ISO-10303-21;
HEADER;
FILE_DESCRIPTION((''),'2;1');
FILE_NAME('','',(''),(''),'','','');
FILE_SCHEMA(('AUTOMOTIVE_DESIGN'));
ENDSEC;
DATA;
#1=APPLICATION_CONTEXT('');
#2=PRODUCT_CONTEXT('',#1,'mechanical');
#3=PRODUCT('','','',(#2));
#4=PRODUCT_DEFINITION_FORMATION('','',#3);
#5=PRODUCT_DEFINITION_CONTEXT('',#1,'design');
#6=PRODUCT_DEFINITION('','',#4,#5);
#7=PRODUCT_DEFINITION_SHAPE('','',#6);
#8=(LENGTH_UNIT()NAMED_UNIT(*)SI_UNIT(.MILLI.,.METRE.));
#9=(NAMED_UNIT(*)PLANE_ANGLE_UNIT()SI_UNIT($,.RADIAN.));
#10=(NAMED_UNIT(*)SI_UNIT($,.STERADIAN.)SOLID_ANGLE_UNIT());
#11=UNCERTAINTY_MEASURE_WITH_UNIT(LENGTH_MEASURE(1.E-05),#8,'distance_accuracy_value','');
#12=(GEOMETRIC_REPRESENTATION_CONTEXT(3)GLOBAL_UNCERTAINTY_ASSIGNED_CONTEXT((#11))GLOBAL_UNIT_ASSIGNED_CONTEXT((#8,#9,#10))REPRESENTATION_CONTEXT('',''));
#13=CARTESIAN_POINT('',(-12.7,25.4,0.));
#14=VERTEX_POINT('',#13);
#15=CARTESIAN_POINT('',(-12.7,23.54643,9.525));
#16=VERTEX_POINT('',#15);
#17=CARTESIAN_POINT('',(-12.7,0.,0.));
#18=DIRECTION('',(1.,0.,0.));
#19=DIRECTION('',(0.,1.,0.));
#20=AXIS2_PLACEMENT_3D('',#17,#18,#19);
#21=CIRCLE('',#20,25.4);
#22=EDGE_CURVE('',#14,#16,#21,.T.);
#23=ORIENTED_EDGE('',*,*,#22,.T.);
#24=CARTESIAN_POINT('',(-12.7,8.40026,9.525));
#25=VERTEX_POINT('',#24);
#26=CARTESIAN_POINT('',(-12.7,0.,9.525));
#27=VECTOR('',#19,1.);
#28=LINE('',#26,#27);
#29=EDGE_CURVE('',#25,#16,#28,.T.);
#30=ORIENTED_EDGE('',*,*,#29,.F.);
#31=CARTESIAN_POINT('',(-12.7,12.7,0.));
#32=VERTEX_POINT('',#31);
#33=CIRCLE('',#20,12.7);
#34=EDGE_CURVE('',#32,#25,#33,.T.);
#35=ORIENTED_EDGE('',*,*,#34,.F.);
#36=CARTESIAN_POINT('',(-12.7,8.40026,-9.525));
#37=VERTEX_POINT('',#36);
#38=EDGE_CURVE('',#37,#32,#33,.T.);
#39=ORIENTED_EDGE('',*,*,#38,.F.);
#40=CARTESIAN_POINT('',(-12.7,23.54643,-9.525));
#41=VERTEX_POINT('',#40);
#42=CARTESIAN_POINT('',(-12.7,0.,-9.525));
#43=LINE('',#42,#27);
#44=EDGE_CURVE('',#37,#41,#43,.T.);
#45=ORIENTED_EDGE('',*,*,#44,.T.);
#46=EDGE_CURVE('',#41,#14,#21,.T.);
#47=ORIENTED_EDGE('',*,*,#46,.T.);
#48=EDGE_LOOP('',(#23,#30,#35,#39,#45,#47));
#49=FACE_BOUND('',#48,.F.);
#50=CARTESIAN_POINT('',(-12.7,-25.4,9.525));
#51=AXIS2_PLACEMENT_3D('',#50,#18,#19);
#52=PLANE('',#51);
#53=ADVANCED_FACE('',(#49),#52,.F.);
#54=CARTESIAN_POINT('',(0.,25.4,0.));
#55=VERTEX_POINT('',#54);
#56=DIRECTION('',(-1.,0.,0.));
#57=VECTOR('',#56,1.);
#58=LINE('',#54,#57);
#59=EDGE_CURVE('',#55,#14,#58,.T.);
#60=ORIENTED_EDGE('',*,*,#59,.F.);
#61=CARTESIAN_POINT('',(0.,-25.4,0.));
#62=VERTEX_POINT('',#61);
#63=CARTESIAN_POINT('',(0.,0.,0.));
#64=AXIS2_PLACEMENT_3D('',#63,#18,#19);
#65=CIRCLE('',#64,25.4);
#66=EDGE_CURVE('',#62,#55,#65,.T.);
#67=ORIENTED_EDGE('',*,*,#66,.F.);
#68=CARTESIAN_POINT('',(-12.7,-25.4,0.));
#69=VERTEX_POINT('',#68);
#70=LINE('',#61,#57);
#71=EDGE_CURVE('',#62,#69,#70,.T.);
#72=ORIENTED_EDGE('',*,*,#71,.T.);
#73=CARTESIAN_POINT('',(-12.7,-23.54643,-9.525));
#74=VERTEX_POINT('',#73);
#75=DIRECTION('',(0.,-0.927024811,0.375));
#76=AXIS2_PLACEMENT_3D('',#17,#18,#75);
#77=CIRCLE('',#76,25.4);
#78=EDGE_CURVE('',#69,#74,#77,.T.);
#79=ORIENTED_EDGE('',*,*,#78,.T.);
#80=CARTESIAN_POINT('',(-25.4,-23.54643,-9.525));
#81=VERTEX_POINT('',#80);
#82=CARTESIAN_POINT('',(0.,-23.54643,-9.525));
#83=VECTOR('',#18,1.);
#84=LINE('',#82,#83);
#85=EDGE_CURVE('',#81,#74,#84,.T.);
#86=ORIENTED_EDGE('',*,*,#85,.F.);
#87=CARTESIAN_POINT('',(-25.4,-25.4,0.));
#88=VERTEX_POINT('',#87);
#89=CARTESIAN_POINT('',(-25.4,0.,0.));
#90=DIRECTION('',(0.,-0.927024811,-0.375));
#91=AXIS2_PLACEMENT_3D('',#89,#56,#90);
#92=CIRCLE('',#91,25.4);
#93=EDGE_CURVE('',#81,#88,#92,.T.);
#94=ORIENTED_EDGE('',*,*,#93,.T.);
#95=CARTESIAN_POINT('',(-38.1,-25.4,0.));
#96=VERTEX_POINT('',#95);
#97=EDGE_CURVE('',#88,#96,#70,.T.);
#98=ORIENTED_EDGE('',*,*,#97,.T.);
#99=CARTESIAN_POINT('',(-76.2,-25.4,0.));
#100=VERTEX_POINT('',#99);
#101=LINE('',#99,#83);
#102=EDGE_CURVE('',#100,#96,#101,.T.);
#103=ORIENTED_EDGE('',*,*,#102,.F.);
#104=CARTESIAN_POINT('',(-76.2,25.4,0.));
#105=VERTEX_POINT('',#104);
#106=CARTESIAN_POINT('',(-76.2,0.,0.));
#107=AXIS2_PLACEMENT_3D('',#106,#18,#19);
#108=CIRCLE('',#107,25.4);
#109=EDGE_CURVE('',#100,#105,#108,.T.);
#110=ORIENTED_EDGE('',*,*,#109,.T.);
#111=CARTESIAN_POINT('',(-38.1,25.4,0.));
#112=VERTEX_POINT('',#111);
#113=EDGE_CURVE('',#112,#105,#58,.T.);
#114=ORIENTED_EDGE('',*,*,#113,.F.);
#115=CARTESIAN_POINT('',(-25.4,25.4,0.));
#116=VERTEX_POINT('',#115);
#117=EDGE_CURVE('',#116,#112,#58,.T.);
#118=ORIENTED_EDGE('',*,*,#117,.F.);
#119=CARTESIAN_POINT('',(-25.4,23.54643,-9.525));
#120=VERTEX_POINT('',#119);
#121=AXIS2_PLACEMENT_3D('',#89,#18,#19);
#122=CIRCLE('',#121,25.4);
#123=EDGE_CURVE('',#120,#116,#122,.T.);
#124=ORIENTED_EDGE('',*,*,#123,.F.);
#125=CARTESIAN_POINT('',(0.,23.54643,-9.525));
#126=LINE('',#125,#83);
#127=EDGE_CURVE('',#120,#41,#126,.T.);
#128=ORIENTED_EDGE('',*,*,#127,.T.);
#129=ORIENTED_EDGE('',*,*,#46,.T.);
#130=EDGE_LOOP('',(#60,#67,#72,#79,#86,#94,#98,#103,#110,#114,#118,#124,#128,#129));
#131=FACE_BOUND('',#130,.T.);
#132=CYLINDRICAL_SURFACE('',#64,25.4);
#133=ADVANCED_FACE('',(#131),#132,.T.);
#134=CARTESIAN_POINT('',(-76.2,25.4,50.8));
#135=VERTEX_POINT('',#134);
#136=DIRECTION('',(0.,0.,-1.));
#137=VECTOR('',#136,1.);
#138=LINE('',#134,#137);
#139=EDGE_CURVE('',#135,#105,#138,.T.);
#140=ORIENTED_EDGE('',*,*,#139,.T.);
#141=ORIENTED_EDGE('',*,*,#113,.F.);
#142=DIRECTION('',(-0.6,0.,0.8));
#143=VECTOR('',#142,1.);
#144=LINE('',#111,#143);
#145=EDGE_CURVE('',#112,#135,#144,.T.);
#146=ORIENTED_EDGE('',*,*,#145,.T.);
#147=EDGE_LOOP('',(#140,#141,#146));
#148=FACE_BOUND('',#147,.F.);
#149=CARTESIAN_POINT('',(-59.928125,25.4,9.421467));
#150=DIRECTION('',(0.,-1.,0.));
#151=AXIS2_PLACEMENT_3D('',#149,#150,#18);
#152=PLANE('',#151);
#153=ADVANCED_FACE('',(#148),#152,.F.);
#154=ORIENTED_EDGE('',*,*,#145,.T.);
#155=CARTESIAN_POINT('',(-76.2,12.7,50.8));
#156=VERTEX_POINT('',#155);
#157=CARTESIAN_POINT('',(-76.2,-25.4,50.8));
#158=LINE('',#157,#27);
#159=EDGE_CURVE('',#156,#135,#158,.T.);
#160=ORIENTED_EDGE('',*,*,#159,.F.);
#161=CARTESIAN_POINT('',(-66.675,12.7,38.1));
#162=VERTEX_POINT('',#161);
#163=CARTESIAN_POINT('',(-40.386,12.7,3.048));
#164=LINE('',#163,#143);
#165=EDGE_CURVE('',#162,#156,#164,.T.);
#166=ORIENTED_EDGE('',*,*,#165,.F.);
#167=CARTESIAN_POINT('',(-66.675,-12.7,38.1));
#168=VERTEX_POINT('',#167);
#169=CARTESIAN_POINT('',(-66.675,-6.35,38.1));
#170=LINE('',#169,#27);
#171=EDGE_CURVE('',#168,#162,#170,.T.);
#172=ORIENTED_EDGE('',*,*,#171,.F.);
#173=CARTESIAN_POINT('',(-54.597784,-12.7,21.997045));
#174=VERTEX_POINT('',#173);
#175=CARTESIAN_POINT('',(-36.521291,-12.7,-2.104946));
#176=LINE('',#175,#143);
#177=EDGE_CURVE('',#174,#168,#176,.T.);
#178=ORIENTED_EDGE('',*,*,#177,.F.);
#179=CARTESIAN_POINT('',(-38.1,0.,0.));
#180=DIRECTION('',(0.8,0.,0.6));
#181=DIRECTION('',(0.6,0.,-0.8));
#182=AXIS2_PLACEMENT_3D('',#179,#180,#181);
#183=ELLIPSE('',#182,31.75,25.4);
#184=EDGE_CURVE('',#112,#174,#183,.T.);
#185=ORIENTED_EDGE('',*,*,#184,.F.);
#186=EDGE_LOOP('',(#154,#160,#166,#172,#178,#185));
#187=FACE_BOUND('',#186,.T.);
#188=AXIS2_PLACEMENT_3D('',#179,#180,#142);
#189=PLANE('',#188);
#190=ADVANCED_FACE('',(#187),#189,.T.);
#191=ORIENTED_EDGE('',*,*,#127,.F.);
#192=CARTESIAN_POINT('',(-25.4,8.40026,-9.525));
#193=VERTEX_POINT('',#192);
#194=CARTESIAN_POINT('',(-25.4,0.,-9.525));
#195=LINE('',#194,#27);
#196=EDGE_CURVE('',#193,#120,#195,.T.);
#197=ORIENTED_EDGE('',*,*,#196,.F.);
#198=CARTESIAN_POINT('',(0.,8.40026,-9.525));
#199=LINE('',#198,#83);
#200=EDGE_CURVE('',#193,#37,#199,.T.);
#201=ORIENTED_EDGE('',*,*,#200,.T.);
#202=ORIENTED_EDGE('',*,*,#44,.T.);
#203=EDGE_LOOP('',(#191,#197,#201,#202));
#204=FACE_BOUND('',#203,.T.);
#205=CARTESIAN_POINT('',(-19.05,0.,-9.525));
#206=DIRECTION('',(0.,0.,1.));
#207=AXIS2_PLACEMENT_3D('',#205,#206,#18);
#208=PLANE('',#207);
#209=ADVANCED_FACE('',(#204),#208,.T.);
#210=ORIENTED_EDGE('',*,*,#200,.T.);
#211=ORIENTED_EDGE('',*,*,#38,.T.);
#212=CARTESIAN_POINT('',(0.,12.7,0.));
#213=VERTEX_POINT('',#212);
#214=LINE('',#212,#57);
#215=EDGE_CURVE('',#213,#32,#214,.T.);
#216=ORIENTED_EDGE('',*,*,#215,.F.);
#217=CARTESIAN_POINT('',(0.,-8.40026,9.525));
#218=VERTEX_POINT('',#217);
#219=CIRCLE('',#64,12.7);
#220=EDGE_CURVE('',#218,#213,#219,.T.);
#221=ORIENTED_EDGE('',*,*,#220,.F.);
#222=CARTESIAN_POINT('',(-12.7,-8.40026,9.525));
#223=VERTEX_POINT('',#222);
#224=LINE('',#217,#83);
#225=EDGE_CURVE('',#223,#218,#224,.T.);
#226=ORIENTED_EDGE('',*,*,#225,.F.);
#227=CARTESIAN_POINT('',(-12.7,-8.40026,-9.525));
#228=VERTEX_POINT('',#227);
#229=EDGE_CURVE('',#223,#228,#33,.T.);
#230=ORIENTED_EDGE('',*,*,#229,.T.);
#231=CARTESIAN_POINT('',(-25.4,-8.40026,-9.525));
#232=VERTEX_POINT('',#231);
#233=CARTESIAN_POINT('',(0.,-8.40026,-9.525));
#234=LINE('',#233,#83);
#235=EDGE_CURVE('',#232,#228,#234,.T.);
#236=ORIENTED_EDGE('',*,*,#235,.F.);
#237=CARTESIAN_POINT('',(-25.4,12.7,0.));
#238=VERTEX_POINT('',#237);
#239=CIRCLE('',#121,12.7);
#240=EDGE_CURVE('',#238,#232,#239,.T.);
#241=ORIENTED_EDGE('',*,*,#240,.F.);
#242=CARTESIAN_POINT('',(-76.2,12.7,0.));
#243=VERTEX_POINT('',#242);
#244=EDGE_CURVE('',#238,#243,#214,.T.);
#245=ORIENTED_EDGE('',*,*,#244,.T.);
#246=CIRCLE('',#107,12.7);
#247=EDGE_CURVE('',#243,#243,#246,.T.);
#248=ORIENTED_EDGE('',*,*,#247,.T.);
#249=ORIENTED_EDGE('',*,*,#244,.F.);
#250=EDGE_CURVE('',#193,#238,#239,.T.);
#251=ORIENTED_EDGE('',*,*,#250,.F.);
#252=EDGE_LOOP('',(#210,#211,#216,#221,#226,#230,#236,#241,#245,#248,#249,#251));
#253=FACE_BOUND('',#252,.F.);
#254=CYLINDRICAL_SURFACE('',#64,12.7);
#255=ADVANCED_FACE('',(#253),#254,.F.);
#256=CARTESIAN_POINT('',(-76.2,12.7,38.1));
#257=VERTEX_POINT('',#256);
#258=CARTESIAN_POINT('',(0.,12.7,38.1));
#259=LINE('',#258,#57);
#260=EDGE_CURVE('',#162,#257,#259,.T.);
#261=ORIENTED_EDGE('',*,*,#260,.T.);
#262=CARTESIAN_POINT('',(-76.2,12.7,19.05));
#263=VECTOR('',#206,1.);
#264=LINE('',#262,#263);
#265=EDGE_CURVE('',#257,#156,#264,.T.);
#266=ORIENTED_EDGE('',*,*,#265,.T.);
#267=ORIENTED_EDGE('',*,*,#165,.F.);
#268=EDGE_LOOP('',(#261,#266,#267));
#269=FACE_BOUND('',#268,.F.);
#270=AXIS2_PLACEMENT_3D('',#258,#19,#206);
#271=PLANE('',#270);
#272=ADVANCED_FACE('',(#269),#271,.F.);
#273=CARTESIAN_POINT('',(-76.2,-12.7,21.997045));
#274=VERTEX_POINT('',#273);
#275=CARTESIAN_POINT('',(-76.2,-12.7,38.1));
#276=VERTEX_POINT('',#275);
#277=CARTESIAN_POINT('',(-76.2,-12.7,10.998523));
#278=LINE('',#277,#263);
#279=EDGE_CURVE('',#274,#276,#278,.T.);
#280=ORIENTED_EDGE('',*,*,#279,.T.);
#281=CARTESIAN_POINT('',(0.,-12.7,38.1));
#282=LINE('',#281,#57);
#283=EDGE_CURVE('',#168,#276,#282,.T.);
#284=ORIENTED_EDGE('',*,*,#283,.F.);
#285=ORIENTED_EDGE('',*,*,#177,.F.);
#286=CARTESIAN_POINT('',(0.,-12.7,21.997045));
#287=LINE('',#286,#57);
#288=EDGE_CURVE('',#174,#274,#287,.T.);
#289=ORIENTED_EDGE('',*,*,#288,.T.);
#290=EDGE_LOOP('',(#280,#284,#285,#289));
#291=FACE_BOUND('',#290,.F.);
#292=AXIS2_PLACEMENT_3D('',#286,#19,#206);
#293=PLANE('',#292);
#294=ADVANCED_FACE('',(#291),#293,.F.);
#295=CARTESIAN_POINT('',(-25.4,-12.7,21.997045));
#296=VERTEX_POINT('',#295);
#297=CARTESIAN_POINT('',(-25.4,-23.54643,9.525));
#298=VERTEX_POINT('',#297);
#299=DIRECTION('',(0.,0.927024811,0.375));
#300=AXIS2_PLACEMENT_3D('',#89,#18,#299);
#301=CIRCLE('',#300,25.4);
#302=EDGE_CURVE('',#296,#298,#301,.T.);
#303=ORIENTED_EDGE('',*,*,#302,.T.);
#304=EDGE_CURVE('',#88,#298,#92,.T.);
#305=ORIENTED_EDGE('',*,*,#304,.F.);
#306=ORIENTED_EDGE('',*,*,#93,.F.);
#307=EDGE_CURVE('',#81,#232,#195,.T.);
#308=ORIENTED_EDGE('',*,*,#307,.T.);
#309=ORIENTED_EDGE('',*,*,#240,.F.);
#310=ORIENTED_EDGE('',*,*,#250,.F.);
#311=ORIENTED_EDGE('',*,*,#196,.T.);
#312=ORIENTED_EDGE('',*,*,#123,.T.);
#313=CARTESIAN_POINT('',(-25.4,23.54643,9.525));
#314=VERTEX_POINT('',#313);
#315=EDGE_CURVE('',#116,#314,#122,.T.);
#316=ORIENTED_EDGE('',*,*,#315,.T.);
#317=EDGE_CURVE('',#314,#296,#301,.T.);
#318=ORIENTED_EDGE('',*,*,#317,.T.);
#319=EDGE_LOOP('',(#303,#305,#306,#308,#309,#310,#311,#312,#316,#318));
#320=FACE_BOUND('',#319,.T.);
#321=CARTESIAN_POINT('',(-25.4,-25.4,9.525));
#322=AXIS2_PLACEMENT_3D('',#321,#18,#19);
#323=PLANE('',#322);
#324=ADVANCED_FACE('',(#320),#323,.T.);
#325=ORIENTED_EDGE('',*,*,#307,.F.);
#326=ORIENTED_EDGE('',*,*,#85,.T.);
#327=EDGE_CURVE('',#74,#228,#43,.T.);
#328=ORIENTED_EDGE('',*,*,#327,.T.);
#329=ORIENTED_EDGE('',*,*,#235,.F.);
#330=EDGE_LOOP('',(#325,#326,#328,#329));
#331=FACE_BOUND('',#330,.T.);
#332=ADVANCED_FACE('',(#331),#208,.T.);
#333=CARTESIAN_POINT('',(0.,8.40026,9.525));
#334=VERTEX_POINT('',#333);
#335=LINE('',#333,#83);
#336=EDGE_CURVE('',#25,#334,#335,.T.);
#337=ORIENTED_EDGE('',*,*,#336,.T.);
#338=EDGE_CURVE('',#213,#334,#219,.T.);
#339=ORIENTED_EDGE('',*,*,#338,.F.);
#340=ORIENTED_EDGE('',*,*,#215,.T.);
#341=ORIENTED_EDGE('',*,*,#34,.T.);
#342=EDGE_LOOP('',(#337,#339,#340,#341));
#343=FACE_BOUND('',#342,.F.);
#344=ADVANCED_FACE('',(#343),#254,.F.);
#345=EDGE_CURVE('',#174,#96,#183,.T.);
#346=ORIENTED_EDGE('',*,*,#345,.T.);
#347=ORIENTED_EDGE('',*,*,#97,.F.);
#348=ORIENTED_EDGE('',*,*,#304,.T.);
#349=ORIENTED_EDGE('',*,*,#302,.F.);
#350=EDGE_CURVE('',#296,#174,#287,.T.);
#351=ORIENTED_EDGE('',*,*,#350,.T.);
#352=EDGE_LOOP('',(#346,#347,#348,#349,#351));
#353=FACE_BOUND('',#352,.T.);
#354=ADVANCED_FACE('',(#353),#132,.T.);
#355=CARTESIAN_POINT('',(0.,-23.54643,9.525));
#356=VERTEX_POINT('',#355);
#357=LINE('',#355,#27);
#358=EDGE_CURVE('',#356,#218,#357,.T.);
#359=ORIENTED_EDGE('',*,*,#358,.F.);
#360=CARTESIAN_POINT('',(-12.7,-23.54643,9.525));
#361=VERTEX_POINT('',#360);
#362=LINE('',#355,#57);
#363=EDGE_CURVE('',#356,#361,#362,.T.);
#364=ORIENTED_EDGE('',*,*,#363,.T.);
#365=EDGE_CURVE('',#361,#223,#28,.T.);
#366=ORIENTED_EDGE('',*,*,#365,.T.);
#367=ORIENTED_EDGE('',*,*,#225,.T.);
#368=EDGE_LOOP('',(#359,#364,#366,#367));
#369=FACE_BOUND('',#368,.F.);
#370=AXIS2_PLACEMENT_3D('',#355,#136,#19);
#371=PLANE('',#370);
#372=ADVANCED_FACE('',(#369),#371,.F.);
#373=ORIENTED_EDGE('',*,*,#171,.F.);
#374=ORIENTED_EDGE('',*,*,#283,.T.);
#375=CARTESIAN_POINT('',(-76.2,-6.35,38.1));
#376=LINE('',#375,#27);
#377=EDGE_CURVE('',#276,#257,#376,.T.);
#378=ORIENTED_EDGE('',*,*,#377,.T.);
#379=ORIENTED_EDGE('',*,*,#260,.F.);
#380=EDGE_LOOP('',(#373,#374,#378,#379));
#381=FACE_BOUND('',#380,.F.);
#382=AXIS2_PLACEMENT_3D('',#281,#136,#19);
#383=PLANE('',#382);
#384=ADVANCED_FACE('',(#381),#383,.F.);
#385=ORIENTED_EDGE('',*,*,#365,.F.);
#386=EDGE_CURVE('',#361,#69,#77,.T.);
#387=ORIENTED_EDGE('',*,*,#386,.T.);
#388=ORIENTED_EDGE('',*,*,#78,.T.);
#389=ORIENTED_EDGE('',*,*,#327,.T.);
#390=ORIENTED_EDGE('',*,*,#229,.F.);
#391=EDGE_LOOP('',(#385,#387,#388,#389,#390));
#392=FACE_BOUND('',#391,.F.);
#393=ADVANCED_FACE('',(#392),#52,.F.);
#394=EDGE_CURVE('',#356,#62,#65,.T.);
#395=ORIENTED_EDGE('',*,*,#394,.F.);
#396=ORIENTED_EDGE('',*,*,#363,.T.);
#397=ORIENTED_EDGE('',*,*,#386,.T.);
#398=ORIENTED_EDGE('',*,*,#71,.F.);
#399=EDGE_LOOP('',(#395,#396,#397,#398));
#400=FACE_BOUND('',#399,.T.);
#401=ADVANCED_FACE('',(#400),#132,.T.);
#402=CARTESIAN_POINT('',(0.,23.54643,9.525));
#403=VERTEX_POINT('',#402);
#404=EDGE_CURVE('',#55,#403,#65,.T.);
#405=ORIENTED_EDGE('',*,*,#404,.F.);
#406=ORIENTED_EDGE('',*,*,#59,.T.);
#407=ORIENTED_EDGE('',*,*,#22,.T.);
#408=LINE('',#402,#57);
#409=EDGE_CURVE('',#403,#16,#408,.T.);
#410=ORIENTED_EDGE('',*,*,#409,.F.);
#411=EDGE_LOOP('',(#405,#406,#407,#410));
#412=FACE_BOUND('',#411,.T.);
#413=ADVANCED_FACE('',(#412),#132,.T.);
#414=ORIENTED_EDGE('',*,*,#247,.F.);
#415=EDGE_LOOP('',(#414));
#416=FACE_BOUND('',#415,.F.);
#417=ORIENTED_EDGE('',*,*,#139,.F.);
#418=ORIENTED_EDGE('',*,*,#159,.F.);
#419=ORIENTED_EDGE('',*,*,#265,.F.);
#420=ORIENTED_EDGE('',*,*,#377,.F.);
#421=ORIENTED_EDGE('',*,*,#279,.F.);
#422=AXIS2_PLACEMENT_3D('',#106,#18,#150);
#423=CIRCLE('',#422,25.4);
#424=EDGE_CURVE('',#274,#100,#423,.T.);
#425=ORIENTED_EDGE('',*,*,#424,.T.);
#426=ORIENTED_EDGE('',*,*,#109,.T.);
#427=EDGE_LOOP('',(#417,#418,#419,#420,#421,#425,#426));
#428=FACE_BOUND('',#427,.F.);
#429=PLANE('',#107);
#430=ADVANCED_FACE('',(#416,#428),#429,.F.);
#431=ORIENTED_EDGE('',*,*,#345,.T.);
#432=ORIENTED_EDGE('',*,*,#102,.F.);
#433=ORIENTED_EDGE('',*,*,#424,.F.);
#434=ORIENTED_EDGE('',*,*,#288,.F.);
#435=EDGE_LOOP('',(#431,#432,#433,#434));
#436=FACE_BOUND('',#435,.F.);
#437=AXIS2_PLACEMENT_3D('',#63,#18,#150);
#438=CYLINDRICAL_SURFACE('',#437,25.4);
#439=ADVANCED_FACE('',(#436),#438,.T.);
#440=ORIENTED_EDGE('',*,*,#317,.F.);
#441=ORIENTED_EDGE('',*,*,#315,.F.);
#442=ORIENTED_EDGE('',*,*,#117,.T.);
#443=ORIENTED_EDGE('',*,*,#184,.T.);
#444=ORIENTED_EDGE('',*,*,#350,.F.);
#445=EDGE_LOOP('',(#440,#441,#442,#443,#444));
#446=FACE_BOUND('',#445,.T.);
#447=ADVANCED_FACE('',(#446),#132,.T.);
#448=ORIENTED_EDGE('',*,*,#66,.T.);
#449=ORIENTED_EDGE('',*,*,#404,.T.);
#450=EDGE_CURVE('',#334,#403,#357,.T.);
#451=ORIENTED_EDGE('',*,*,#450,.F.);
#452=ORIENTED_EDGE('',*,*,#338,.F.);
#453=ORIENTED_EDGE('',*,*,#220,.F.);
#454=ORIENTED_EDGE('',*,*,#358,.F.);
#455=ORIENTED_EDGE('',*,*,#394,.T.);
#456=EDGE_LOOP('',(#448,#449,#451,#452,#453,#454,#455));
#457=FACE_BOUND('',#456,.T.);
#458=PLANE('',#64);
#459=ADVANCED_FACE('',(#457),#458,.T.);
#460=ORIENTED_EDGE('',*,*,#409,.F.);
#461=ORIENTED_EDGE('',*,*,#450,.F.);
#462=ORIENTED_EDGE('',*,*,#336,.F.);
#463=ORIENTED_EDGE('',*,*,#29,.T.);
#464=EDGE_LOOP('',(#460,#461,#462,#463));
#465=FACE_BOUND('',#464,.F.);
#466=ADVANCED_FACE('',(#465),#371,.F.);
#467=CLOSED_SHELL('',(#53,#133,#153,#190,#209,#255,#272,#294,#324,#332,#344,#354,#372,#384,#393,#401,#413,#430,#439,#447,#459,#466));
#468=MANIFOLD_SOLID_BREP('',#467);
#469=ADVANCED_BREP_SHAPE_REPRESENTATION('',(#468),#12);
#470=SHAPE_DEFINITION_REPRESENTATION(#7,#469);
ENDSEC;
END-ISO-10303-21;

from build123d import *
from build123d import SkipClean  # not in build123d's __all__

# Parameters (mm, degrees)
F0_R      = 25.4
F1_DEPTH  = 76.2
F3_DEPTH  = 25.4
F4_W      = 12.7
F4_H      = 50.8
F5_DEPTH  = 19.05
F7_DEPTH  = 25.4
F8_R      = 12.7
F9_DEPTH  = 76.201
F11_DEPTH = 76.201
F12_W     = 25.4
F12_H     = 12.7
F13_DEPTH = 76.201


with BuildPart() as f1:
    # F0 (on Right) → F1 (new body)
    with BuildSketch(Plane.YZ):
        Circle(F0_R)
    extrude(amount=-F1_DEPTH)

    # F2 (on face) → F3 (cut)
    with BuildSketch(Plane.YZ):
        with BuildLine():
            ThreePointArc((23.5464301965, 9.525), (0, 25.4), (-23.5464301965, 9.525))
            Line((-23.5464301965, 9.525), (23.5464301965, 9.525))
        make_face()
    extrude(amount=-F3_DEPTH, mode=Mode.SUBTRACT)

    # F4 (on face) → F5 (cut)
    with BuildSketch(Plane.XY.offset(9.525)):
        with Locations((-19.05, 0)):
            Rectangle(F4_W, F4_H)
    extrude(amount=-F5_DEPTH, mode=Mode.SUBTRACT)

    # F6 (on Front) → F7 (join, symmetric)
    with BuildSketch(Plane.XZ):
        Polygon((-76.2, 0), (-38.1, 0), (-54.76875, 22.225), (-76.2, 22.225), align=None)
        Polygon((-76.2, 22.225), (-54.76875, 22.225), (-76.2, 50.8), align=None)
    extrude(amount=F7_DEPTH, both=True)

    # F8 (on Right) → F9 (cut, through all)
    with BuildSketch(Plane.YZ):
        Circle(F8_R)
    extrude(amount=-F9_DEPTH, mode=Mode.SUBTRACT)

    # F10 (on face) → F11 (cut, through all)
    with BuildSketch(Plane.YZ):
        with BuildLine():
            ThreePointArc((-25.4, 0), (-21.9970452561, 12.7), (-12.7, 21.9970452561))
            Line((-12.7, 21.9970452561), (-12.7, 50.8))
            Line((-12.7, 50.8), (-25.4, 50.8))
            Line((-25.4, 50.8), (-25.4, 0))
        make_face()
    with SkipClean():  # cleaning this boolean's faces spoils the solid; the shape is the same uncleaned
        extrude(amount=-F11_DEPTH, mode=Mode.SUBTRACT)

    # F12 (on face) → F13 (cut, through all)
    with BuildSketch(Plane.YZ):
        with Locations((0, 44.45)):
            Rectangle(F12_W, F12_H)
    with SkipClean():  # cleaning this boolean's faces spoils the solid; the shape is the same uncleaned
        extrude(amount=-F13_DEPTH, mode=Mode.SUBTRACT)


solid = f1.part
